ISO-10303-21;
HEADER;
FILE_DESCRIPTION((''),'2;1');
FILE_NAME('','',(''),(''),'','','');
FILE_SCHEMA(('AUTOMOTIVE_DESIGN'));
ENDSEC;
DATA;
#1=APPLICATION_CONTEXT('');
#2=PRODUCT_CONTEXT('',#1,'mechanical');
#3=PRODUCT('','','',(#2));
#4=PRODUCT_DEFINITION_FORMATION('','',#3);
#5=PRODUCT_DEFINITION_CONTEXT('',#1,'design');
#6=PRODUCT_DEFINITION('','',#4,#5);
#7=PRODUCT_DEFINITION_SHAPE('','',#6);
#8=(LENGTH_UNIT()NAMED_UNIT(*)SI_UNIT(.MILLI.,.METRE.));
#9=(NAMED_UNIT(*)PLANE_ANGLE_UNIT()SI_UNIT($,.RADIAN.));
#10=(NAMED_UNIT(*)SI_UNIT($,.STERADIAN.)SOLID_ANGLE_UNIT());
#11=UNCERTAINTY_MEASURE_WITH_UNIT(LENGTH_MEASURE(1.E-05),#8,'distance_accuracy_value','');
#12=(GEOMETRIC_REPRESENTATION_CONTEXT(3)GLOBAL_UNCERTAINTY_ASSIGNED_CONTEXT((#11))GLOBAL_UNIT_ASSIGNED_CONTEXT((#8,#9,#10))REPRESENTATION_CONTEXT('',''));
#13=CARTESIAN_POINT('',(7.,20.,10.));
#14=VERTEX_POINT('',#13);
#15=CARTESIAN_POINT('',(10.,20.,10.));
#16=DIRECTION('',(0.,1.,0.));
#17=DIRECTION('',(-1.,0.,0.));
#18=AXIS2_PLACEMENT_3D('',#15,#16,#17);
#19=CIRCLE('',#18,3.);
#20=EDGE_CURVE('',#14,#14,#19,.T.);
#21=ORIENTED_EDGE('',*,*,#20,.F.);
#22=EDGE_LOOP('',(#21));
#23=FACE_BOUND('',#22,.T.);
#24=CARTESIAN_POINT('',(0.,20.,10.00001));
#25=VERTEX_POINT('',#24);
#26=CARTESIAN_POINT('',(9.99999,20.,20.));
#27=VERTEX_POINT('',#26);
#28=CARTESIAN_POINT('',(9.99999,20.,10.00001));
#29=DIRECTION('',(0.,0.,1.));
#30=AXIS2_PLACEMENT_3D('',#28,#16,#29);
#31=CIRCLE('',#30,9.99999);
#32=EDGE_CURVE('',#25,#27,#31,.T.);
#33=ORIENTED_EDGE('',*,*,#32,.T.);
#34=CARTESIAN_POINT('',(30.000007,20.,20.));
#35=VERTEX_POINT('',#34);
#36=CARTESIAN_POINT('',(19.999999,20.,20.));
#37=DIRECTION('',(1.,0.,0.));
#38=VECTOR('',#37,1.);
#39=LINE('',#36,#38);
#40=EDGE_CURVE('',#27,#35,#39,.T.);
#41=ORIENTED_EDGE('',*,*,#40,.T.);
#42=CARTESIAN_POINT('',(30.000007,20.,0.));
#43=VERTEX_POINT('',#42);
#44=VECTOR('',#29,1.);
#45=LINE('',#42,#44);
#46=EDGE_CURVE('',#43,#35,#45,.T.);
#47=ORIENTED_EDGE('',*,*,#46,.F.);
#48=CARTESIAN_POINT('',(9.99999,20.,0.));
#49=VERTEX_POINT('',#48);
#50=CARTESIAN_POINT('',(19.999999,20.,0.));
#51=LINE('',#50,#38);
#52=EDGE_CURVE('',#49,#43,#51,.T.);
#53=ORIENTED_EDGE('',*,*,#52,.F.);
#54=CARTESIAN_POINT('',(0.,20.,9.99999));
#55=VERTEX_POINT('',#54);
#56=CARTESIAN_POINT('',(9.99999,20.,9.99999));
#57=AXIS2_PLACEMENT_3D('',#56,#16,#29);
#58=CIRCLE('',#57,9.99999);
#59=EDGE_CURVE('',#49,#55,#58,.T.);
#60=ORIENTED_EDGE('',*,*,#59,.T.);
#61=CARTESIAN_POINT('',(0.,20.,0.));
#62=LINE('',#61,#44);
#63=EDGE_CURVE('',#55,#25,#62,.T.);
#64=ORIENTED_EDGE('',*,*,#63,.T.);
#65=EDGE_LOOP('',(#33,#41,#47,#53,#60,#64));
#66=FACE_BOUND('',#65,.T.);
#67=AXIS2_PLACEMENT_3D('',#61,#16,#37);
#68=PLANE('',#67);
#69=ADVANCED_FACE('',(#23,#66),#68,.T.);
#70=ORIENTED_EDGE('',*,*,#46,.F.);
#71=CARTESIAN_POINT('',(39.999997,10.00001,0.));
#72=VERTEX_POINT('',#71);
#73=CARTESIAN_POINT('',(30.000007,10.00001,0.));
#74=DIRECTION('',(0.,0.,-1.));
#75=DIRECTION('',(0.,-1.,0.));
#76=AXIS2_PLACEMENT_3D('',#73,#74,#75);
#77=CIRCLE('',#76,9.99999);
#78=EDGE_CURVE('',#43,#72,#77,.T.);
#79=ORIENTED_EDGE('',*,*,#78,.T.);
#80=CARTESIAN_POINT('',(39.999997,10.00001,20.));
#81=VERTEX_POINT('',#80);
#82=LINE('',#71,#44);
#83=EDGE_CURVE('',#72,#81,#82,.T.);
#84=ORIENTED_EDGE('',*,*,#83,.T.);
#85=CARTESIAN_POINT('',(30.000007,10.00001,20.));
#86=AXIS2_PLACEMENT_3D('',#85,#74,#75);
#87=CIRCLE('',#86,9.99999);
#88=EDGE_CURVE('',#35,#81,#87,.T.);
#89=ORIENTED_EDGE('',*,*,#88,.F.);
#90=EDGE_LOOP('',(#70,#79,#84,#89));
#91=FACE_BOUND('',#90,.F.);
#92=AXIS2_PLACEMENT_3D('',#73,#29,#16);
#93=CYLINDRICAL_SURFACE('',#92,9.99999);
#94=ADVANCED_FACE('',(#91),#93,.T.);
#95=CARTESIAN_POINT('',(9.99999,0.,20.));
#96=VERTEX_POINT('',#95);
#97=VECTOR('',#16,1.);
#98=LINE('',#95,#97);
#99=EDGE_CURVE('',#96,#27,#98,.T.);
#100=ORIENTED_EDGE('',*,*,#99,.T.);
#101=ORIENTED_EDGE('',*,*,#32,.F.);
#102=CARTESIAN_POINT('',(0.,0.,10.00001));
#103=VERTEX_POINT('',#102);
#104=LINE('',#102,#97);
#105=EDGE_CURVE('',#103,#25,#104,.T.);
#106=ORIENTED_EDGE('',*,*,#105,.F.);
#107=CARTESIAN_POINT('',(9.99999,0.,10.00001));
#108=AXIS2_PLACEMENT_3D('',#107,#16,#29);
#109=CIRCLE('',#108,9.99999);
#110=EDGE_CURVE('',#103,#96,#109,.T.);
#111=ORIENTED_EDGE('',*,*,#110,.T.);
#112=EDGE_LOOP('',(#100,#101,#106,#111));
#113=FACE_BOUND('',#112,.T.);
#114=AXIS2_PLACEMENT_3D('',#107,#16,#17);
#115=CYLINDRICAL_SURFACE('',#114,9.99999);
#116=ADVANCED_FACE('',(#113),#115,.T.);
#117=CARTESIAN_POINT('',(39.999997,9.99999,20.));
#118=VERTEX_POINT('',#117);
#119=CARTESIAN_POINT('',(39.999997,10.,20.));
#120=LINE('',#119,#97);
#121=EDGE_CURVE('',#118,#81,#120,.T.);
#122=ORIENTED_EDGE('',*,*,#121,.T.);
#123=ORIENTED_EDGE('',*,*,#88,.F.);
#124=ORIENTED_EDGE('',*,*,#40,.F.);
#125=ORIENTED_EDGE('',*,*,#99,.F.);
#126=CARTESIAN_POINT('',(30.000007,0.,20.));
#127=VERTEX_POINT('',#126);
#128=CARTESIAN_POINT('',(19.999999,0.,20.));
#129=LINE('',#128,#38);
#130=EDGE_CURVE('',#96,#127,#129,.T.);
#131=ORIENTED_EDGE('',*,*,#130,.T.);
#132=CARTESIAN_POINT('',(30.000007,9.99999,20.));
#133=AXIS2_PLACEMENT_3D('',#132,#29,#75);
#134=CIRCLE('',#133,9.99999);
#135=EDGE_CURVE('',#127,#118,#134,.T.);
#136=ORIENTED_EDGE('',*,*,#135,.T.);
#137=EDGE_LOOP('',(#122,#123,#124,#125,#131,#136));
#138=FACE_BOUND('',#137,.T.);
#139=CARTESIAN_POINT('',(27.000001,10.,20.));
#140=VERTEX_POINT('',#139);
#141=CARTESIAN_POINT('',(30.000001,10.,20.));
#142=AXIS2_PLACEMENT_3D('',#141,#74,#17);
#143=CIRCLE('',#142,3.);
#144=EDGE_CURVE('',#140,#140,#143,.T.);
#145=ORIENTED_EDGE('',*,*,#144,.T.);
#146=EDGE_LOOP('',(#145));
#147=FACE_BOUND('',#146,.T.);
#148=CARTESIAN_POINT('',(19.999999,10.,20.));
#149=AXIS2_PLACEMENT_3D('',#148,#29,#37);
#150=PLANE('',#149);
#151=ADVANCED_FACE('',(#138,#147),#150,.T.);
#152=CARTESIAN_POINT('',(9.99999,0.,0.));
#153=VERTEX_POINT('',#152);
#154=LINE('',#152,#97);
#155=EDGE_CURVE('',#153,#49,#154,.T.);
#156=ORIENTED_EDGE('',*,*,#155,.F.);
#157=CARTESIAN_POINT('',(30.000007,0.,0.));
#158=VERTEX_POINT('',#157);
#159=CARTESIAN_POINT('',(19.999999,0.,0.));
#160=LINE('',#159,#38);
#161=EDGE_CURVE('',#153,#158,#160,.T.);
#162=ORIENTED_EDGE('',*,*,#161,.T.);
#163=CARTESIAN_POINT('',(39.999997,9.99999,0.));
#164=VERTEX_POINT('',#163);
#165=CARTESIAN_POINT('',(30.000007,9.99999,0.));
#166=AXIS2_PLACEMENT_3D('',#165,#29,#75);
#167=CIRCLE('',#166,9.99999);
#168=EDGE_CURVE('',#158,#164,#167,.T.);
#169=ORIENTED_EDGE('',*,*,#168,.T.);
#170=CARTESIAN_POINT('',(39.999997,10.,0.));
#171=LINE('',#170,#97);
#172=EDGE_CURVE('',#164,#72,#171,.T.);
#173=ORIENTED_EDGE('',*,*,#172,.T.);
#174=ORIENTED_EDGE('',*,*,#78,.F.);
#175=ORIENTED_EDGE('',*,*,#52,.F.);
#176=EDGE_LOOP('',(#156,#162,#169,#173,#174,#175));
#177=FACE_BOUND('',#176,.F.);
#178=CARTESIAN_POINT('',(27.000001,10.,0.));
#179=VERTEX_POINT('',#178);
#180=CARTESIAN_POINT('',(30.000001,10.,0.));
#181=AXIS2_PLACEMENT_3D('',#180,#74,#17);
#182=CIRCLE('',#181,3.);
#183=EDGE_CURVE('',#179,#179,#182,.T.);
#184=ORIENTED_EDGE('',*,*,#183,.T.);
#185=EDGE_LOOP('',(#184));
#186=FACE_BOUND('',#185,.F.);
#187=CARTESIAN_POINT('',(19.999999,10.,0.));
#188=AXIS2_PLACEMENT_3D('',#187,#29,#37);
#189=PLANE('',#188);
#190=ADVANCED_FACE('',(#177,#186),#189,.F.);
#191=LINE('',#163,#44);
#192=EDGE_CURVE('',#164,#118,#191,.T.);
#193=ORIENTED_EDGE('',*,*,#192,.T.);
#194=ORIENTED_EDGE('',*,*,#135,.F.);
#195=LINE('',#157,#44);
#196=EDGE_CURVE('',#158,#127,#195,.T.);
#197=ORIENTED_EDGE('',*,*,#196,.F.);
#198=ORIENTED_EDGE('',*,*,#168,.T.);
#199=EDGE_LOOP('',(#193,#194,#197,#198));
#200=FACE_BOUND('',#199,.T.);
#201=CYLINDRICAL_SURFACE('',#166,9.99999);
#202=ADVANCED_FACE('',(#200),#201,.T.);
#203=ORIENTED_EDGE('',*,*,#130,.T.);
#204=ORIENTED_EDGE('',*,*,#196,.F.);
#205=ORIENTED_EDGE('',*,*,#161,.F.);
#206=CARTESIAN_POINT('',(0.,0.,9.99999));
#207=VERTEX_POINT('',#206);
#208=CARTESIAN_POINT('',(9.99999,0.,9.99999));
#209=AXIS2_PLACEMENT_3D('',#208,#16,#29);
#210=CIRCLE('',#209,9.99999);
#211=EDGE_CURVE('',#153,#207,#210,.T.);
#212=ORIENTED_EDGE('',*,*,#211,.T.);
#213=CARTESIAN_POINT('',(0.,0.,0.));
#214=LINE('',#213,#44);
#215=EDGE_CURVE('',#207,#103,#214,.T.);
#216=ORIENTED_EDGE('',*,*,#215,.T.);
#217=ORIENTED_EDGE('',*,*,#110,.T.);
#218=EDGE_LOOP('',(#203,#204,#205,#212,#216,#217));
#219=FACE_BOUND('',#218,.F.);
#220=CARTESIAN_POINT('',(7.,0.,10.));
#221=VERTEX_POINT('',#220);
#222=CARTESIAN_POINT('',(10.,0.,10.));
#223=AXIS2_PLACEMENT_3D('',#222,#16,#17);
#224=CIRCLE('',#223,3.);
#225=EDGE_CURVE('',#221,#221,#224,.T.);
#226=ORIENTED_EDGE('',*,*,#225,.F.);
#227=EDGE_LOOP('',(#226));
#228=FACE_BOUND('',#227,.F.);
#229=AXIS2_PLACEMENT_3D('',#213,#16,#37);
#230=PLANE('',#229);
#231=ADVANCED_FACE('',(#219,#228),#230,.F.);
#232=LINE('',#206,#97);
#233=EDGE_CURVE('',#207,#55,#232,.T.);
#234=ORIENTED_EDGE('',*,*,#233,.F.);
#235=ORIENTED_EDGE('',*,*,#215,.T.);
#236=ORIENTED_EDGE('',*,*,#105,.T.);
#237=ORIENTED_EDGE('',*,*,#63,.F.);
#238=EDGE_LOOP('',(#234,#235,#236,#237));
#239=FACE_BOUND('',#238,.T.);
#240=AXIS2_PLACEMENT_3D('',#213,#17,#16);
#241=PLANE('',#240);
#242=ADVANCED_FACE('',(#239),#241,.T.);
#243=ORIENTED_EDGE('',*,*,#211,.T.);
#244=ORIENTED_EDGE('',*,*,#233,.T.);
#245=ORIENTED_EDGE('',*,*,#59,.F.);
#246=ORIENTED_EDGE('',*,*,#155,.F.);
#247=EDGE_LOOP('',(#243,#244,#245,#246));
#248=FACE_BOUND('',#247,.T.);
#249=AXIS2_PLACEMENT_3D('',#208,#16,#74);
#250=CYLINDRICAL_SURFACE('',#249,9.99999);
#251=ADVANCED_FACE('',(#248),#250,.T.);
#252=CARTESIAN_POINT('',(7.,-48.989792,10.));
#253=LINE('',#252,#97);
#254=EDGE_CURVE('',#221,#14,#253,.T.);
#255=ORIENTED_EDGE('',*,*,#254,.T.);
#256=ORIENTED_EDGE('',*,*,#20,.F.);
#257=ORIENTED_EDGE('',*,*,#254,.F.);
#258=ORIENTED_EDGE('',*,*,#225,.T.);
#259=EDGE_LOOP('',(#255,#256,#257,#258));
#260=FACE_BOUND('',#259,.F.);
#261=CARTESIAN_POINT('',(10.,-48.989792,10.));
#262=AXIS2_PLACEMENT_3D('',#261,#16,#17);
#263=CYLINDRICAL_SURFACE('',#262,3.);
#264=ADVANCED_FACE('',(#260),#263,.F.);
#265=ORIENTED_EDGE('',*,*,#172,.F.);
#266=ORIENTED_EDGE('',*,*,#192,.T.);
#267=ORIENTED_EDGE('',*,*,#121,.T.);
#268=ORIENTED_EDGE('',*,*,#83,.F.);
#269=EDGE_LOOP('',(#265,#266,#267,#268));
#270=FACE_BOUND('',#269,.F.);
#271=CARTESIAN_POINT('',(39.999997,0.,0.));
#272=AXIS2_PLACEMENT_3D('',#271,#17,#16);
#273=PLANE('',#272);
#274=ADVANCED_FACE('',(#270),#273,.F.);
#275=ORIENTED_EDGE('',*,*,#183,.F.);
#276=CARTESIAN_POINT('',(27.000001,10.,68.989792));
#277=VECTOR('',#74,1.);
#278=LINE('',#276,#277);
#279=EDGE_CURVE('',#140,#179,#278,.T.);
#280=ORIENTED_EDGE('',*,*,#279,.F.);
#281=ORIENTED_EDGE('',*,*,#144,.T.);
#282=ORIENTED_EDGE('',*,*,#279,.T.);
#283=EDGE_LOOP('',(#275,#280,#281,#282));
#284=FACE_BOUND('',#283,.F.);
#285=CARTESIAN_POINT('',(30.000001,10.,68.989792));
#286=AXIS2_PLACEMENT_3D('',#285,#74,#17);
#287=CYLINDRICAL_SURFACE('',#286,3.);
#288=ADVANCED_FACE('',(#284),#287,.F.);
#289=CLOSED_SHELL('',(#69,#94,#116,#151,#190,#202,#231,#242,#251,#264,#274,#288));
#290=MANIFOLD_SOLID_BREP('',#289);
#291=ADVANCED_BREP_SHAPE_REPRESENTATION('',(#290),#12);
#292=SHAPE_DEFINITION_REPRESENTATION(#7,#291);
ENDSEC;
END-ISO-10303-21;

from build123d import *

# Parameters (mm, degrees)
F0_W     = 39.9999970493
F0_H     = 20
F1_DEPTH = 20
F3_D     = 6
F5_D     = 6
F6_R     = 9.99999
F7_R     = 9.99999


# Not quite as in the source:
# - a fillet or chamfer is up to 0.001 mm smaller than in the source, because OpenCascade refuses the exact size


with BuildPart() as f1:
    # F0 (on Top) → F1 (new body)
    with BuildSketch(Plane.XY):
        with Locations((19.9999985246, 10)):
            Rectangle(F0_W, F0_H)
    extrude(amount=F1_DEPTH)

    # F3 (through all)
    with Locations(Plane.XY.offset(20)):
        with Locations((30.0000011921, 10)):
            Hole(F3_D / 2)

    # F5 (through all)
    with Locations(Plane.XZ):
        with Locations((10, 10)):
            Hole(F5_D / 2)

    # F6 (radius 10 in the source; OpenCascade refuses exactly that, so slightly less here)
    f6_edges = [f1.edges().sort_by_distance(p)[0] for p in [
        (39.999997, 0, 10),
        (39.999997, 20, 10),
    ]]
    fillet(f6_edges, radius=F6_R)

    # F7 (radius 10 in the source; OpenCascade refuses exactly that, so slightly less here)
    f7_edges = [f1.edges().sort_by_distance(p)[0] for p in [
        (0, 10, 0),
        (0, 10, 20),
    ]]
    fillet(f7_edges, radius=F7_R)


solid = f1.part
